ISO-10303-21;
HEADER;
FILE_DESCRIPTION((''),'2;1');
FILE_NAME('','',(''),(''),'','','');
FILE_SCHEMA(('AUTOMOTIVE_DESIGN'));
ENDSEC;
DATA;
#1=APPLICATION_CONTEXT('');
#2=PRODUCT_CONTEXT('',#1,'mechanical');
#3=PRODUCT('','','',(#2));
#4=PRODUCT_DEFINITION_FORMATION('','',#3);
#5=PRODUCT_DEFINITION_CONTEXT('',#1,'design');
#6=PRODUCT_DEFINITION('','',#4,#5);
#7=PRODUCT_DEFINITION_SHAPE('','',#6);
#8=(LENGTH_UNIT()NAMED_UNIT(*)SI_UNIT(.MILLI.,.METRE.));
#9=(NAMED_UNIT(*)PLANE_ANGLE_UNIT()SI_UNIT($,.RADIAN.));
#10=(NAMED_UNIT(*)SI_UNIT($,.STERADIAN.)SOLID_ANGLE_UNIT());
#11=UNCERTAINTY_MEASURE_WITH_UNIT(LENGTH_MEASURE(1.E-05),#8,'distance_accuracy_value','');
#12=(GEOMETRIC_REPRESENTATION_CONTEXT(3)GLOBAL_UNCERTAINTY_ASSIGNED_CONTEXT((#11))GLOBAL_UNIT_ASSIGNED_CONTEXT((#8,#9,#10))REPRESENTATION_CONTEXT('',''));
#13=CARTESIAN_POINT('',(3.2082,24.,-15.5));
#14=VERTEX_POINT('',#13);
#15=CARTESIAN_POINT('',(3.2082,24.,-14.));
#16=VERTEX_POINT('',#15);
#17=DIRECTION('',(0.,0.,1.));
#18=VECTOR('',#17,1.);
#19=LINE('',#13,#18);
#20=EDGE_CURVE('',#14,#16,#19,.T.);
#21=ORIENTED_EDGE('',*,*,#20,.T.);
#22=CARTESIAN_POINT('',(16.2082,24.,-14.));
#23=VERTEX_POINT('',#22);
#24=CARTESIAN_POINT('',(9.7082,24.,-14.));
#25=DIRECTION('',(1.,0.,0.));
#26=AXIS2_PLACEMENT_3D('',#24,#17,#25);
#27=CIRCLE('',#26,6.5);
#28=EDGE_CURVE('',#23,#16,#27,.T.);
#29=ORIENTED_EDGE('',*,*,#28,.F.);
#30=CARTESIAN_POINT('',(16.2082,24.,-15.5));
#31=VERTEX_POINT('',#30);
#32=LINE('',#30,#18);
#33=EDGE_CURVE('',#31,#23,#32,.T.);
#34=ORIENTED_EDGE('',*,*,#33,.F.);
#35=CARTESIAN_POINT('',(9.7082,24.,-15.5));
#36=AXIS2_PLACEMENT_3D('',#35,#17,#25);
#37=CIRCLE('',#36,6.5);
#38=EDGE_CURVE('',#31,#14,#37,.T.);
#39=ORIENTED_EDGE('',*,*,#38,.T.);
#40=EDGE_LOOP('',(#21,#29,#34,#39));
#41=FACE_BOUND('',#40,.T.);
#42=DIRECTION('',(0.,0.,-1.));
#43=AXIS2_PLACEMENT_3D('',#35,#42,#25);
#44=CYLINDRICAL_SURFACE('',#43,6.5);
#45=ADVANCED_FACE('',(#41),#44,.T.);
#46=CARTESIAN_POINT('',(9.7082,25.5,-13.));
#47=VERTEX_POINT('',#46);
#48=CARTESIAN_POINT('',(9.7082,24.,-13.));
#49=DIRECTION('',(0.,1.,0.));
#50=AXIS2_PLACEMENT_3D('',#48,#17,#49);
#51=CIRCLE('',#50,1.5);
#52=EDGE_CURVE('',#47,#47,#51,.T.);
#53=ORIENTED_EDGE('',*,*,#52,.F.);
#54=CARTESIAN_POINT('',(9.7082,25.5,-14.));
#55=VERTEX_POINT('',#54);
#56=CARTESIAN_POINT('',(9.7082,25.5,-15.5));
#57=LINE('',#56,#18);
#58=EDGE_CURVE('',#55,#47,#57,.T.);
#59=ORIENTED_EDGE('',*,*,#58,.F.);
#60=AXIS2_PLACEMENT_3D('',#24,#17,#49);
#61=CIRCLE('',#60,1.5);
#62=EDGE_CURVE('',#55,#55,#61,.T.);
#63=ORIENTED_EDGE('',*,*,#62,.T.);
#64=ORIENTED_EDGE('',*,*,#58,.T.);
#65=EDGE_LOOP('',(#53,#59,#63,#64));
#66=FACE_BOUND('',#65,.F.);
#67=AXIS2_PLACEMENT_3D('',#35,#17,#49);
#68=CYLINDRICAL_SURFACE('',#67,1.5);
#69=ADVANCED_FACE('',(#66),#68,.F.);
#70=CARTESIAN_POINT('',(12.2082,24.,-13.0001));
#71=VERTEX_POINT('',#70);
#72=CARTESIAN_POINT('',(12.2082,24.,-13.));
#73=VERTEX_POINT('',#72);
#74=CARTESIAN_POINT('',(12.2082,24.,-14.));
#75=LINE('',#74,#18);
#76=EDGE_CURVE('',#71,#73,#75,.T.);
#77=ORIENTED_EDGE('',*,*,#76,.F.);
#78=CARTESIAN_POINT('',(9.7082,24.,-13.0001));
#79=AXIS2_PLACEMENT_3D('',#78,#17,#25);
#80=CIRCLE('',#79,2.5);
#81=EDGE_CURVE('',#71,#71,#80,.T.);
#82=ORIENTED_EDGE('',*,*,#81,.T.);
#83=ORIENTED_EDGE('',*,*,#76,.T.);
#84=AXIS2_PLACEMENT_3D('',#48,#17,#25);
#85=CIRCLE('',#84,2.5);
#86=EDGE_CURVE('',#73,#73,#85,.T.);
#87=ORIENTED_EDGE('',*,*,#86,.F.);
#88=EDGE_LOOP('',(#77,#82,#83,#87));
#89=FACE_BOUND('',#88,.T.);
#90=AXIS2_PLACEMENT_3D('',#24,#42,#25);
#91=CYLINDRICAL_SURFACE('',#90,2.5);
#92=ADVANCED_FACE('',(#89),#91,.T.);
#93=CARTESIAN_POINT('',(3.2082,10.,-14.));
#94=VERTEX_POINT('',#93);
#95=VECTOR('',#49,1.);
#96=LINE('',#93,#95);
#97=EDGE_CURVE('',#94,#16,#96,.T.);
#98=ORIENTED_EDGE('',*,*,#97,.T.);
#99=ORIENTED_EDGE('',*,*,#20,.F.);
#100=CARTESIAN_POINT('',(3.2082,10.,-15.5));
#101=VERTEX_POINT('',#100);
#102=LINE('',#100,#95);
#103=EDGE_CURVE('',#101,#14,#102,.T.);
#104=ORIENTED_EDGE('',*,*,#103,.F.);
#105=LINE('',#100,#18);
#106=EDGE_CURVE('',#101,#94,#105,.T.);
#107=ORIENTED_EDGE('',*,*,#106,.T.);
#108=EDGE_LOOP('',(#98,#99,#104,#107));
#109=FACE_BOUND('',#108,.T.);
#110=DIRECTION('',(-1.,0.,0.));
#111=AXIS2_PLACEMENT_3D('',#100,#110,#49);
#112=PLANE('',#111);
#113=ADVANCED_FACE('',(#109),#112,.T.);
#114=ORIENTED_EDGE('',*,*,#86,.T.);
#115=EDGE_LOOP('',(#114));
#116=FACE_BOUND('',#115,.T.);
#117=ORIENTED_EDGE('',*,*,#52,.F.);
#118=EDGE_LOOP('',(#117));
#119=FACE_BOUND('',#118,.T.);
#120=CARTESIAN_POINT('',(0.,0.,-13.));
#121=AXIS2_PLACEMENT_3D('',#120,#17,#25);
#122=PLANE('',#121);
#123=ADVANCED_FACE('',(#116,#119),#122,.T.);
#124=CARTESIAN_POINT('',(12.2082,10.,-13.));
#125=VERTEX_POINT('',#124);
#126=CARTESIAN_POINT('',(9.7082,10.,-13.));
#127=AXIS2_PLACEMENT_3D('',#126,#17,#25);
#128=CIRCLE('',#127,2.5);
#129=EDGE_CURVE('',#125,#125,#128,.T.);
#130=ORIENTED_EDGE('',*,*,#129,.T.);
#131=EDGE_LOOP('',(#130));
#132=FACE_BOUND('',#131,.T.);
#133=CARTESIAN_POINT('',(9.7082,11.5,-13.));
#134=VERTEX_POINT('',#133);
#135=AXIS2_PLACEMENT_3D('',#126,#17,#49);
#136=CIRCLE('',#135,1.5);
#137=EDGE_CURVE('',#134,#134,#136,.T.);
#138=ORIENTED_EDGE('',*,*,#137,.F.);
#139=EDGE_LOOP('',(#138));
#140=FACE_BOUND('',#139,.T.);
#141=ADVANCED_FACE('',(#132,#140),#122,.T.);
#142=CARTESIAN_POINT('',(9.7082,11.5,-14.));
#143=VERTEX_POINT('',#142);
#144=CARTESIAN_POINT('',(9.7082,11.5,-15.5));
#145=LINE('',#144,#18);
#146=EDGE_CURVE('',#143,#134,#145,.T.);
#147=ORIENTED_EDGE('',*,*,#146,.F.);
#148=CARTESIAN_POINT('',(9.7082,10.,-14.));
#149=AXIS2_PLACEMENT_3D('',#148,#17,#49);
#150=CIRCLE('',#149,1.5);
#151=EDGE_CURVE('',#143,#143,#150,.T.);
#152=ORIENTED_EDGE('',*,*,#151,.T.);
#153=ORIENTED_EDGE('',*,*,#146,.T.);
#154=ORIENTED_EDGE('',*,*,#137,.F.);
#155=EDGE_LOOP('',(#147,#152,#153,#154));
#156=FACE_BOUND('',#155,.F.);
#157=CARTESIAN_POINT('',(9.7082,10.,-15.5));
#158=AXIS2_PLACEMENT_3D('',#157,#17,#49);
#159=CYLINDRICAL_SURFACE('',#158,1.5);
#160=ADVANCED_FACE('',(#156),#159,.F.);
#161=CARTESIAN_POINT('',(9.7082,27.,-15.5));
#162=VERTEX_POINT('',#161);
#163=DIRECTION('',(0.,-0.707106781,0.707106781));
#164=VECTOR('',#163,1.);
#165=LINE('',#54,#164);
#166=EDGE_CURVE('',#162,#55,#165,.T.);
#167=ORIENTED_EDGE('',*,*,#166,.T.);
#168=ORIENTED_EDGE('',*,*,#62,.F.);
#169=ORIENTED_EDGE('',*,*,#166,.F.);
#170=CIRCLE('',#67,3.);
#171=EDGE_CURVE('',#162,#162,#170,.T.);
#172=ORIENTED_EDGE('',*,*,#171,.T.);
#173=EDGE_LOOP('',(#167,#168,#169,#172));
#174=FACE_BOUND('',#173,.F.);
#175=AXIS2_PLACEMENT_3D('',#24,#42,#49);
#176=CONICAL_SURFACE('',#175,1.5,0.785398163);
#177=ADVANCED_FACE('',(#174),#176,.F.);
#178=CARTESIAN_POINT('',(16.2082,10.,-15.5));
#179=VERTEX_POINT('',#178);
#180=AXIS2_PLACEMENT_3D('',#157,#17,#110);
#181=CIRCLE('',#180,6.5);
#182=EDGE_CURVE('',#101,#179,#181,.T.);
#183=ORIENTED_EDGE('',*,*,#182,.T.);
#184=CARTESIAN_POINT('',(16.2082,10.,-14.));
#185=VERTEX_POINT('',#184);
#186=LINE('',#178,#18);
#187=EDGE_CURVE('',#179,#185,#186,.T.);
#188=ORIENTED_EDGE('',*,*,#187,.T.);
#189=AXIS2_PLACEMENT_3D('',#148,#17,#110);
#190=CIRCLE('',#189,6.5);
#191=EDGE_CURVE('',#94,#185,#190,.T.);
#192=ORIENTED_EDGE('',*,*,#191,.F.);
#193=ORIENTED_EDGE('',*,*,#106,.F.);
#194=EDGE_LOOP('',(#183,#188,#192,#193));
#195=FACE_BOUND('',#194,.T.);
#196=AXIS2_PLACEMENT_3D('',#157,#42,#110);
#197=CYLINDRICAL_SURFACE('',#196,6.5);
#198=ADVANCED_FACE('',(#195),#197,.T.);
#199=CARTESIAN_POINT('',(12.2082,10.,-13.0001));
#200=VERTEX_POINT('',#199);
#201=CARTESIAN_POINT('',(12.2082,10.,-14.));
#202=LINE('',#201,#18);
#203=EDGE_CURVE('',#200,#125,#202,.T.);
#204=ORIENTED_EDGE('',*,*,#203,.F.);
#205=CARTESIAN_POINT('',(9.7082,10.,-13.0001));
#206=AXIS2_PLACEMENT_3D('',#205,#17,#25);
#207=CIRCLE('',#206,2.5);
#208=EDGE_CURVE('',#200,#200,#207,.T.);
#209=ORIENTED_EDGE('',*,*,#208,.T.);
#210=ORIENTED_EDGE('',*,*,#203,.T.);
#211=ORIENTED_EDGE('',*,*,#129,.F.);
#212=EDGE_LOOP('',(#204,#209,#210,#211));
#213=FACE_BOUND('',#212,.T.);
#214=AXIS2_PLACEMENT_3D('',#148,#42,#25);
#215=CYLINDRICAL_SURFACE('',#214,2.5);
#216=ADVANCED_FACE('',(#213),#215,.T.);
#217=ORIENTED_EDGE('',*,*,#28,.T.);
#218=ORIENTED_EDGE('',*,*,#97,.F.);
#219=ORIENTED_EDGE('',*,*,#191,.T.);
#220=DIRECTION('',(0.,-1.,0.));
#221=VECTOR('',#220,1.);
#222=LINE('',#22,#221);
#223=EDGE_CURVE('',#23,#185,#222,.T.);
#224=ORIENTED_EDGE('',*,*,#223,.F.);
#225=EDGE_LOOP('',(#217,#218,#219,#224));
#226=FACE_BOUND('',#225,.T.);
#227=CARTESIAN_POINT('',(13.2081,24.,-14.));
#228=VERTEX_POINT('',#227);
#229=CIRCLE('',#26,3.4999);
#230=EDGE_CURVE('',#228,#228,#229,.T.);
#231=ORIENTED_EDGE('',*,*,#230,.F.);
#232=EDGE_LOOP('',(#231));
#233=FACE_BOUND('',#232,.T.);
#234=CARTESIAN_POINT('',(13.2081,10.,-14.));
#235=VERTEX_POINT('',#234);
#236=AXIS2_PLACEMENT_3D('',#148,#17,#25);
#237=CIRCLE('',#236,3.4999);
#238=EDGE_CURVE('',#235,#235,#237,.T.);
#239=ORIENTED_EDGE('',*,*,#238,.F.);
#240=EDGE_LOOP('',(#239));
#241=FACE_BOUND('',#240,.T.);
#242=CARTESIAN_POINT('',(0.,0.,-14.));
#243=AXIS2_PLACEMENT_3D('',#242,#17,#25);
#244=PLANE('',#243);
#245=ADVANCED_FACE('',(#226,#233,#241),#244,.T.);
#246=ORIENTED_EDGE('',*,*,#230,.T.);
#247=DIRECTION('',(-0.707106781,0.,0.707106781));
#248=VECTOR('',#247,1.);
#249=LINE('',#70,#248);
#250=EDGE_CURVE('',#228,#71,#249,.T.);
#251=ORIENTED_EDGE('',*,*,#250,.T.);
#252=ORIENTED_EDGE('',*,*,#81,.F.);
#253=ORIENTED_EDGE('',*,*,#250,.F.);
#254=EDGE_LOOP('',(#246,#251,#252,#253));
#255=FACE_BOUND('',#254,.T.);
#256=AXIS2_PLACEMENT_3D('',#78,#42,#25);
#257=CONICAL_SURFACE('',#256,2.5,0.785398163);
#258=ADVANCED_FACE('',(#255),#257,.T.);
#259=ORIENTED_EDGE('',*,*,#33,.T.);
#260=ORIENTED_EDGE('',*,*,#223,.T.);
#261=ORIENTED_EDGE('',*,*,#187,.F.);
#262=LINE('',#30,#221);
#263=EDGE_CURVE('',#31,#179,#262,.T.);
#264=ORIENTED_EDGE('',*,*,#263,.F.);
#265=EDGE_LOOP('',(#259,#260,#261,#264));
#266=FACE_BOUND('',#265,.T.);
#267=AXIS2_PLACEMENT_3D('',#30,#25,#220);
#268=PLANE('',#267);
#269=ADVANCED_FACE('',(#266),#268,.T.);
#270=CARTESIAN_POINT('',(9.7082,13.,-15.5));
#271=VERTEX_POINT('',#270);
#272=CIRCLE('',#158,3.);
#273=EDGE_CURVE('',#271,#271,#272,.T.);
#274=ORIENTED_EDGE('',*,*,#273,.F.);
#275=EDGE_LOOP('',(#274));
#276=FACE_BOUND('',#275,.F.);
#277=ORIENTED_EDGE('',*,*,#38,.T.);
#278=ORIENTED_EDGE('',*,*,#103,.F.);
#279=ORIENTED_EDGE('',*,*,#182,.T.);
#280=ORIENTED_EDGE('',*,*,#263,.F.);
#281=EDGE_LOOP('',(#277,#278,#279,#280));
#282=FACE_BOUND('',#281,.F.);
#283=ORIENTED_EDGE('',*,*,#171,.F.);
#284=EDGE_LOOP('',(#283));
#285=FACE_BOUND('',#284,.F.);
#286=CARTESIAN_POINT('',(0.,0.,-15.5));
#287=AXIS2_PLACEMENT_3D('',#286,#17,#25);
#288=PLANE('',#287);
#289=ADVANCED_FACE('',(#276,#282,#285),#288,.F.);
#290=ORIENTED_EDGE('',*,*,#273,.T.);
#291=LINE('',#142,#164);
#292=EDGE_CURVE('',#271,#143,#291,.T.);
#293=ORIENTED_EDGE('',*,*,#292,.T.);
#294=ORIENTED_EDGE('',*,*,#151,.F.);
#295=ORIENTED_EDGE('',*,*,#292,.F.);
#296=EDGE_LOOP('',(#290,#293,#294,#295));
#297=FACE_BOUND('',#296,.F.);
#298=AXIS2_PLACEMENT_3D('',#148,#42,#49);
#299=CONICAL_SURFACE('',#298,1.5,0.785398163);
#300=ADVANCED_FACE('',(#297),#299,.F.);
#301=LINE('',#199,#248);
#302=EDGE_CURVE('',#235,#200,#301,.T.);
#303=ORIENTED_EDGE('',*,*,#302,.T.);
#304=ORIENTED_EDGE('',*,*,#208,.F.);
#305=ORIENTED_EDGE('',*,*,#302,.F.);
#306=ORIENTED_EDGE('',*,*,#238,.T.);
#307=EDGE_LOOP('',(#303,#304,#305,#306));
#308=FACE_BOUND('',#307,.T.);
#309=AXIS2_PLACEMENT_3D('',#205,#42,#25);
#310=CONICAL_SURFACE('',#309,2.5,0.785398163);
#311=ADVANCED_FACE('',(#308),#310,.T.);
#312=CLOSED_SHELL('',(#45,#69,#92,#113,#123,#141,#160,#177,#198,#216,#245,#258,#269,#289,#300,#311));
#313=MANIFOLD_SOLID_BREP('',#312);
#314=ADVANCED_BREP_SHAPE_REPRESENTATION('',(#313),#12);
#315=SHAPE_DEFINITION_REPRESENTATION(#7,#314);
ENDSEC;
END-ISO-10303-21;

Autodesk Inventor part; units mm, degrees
ref_plane "YZ Plane" through (0, 0, 0) normal (1, 0, 0) x (0, 1, 0)
ref_plane "XZ Plane" through (0, 0, 0) normal (0, 1, 0) x (-1, 0, 0)
ref_plane "Work Plane1" through (0, 0, -15.5) normal (0, 0, 1) x (1, 0, 0)
sketch "Sketch1" plane through (0, 0, -15.5) normal (0, 0, 1) x (1, 0, 0)
  arc A0 (3.2082, 10) -> (16.2082, 10) centre (9.7082, 10) ccw
  line L0 (16.2082, 24) -> (16.2082, 10)
  line L1 (3.2082, 10) -> (3.2082, 24)
  arc A1 (16.2082, 24) -> (3.2082, 24) centre (9.7082, 24) ccw
extrude "Extrusion3" add sketch "Sketch1" along normal blind 1.5
sketch "Sketch2" plane through (0, 0, -14) normal (0, 0, 1) x (1, 0, 0)
  circle A0 centre (9.7082, 10) radius 2.5
extrude "Extrusion2" add sketch "Sketch2" along normal blind 1
sketch "Sketch3" plane through (0, 0, -14) normal (0, 0, 1) x (1, 0, 0)
  circle A0 centre (9.7082, 24) radius 2.5
extrude "Extrusion1" add sketch "Sketch3" along normal blind 1
hole "Hole2" at (9.7082, 10, -15.5) direction (0, 0, 1) diameter 3 depth 2.5
sketch "Sketch4" plane through (0, 0, -15.5) normal (0, 0, 1) x (1, 0, 0)
  point P0 (9.7082, 10)
hole "Hole1" at (9.7082, 24, -15.5) direction (0, 0, 1) diameter 3 depth 2.5
chamfer "Chamfer1" distance 1.5 angle 45 2 edges at (9.7082, 22.5, -15.5) (9.7082, 8.5, -15.5)
chamfer "Chamfer2" distance 1 angle 45 2 edges at (7.2082, 24, -14) (7.2082, 10, -14)
sketch "Sketch5" plane through (0, 0, -15.5) normal (0, 0, 1) x (1, 0, 0)
  point P0 (9.7082, 24)
properties part number "Belt Retainer"
